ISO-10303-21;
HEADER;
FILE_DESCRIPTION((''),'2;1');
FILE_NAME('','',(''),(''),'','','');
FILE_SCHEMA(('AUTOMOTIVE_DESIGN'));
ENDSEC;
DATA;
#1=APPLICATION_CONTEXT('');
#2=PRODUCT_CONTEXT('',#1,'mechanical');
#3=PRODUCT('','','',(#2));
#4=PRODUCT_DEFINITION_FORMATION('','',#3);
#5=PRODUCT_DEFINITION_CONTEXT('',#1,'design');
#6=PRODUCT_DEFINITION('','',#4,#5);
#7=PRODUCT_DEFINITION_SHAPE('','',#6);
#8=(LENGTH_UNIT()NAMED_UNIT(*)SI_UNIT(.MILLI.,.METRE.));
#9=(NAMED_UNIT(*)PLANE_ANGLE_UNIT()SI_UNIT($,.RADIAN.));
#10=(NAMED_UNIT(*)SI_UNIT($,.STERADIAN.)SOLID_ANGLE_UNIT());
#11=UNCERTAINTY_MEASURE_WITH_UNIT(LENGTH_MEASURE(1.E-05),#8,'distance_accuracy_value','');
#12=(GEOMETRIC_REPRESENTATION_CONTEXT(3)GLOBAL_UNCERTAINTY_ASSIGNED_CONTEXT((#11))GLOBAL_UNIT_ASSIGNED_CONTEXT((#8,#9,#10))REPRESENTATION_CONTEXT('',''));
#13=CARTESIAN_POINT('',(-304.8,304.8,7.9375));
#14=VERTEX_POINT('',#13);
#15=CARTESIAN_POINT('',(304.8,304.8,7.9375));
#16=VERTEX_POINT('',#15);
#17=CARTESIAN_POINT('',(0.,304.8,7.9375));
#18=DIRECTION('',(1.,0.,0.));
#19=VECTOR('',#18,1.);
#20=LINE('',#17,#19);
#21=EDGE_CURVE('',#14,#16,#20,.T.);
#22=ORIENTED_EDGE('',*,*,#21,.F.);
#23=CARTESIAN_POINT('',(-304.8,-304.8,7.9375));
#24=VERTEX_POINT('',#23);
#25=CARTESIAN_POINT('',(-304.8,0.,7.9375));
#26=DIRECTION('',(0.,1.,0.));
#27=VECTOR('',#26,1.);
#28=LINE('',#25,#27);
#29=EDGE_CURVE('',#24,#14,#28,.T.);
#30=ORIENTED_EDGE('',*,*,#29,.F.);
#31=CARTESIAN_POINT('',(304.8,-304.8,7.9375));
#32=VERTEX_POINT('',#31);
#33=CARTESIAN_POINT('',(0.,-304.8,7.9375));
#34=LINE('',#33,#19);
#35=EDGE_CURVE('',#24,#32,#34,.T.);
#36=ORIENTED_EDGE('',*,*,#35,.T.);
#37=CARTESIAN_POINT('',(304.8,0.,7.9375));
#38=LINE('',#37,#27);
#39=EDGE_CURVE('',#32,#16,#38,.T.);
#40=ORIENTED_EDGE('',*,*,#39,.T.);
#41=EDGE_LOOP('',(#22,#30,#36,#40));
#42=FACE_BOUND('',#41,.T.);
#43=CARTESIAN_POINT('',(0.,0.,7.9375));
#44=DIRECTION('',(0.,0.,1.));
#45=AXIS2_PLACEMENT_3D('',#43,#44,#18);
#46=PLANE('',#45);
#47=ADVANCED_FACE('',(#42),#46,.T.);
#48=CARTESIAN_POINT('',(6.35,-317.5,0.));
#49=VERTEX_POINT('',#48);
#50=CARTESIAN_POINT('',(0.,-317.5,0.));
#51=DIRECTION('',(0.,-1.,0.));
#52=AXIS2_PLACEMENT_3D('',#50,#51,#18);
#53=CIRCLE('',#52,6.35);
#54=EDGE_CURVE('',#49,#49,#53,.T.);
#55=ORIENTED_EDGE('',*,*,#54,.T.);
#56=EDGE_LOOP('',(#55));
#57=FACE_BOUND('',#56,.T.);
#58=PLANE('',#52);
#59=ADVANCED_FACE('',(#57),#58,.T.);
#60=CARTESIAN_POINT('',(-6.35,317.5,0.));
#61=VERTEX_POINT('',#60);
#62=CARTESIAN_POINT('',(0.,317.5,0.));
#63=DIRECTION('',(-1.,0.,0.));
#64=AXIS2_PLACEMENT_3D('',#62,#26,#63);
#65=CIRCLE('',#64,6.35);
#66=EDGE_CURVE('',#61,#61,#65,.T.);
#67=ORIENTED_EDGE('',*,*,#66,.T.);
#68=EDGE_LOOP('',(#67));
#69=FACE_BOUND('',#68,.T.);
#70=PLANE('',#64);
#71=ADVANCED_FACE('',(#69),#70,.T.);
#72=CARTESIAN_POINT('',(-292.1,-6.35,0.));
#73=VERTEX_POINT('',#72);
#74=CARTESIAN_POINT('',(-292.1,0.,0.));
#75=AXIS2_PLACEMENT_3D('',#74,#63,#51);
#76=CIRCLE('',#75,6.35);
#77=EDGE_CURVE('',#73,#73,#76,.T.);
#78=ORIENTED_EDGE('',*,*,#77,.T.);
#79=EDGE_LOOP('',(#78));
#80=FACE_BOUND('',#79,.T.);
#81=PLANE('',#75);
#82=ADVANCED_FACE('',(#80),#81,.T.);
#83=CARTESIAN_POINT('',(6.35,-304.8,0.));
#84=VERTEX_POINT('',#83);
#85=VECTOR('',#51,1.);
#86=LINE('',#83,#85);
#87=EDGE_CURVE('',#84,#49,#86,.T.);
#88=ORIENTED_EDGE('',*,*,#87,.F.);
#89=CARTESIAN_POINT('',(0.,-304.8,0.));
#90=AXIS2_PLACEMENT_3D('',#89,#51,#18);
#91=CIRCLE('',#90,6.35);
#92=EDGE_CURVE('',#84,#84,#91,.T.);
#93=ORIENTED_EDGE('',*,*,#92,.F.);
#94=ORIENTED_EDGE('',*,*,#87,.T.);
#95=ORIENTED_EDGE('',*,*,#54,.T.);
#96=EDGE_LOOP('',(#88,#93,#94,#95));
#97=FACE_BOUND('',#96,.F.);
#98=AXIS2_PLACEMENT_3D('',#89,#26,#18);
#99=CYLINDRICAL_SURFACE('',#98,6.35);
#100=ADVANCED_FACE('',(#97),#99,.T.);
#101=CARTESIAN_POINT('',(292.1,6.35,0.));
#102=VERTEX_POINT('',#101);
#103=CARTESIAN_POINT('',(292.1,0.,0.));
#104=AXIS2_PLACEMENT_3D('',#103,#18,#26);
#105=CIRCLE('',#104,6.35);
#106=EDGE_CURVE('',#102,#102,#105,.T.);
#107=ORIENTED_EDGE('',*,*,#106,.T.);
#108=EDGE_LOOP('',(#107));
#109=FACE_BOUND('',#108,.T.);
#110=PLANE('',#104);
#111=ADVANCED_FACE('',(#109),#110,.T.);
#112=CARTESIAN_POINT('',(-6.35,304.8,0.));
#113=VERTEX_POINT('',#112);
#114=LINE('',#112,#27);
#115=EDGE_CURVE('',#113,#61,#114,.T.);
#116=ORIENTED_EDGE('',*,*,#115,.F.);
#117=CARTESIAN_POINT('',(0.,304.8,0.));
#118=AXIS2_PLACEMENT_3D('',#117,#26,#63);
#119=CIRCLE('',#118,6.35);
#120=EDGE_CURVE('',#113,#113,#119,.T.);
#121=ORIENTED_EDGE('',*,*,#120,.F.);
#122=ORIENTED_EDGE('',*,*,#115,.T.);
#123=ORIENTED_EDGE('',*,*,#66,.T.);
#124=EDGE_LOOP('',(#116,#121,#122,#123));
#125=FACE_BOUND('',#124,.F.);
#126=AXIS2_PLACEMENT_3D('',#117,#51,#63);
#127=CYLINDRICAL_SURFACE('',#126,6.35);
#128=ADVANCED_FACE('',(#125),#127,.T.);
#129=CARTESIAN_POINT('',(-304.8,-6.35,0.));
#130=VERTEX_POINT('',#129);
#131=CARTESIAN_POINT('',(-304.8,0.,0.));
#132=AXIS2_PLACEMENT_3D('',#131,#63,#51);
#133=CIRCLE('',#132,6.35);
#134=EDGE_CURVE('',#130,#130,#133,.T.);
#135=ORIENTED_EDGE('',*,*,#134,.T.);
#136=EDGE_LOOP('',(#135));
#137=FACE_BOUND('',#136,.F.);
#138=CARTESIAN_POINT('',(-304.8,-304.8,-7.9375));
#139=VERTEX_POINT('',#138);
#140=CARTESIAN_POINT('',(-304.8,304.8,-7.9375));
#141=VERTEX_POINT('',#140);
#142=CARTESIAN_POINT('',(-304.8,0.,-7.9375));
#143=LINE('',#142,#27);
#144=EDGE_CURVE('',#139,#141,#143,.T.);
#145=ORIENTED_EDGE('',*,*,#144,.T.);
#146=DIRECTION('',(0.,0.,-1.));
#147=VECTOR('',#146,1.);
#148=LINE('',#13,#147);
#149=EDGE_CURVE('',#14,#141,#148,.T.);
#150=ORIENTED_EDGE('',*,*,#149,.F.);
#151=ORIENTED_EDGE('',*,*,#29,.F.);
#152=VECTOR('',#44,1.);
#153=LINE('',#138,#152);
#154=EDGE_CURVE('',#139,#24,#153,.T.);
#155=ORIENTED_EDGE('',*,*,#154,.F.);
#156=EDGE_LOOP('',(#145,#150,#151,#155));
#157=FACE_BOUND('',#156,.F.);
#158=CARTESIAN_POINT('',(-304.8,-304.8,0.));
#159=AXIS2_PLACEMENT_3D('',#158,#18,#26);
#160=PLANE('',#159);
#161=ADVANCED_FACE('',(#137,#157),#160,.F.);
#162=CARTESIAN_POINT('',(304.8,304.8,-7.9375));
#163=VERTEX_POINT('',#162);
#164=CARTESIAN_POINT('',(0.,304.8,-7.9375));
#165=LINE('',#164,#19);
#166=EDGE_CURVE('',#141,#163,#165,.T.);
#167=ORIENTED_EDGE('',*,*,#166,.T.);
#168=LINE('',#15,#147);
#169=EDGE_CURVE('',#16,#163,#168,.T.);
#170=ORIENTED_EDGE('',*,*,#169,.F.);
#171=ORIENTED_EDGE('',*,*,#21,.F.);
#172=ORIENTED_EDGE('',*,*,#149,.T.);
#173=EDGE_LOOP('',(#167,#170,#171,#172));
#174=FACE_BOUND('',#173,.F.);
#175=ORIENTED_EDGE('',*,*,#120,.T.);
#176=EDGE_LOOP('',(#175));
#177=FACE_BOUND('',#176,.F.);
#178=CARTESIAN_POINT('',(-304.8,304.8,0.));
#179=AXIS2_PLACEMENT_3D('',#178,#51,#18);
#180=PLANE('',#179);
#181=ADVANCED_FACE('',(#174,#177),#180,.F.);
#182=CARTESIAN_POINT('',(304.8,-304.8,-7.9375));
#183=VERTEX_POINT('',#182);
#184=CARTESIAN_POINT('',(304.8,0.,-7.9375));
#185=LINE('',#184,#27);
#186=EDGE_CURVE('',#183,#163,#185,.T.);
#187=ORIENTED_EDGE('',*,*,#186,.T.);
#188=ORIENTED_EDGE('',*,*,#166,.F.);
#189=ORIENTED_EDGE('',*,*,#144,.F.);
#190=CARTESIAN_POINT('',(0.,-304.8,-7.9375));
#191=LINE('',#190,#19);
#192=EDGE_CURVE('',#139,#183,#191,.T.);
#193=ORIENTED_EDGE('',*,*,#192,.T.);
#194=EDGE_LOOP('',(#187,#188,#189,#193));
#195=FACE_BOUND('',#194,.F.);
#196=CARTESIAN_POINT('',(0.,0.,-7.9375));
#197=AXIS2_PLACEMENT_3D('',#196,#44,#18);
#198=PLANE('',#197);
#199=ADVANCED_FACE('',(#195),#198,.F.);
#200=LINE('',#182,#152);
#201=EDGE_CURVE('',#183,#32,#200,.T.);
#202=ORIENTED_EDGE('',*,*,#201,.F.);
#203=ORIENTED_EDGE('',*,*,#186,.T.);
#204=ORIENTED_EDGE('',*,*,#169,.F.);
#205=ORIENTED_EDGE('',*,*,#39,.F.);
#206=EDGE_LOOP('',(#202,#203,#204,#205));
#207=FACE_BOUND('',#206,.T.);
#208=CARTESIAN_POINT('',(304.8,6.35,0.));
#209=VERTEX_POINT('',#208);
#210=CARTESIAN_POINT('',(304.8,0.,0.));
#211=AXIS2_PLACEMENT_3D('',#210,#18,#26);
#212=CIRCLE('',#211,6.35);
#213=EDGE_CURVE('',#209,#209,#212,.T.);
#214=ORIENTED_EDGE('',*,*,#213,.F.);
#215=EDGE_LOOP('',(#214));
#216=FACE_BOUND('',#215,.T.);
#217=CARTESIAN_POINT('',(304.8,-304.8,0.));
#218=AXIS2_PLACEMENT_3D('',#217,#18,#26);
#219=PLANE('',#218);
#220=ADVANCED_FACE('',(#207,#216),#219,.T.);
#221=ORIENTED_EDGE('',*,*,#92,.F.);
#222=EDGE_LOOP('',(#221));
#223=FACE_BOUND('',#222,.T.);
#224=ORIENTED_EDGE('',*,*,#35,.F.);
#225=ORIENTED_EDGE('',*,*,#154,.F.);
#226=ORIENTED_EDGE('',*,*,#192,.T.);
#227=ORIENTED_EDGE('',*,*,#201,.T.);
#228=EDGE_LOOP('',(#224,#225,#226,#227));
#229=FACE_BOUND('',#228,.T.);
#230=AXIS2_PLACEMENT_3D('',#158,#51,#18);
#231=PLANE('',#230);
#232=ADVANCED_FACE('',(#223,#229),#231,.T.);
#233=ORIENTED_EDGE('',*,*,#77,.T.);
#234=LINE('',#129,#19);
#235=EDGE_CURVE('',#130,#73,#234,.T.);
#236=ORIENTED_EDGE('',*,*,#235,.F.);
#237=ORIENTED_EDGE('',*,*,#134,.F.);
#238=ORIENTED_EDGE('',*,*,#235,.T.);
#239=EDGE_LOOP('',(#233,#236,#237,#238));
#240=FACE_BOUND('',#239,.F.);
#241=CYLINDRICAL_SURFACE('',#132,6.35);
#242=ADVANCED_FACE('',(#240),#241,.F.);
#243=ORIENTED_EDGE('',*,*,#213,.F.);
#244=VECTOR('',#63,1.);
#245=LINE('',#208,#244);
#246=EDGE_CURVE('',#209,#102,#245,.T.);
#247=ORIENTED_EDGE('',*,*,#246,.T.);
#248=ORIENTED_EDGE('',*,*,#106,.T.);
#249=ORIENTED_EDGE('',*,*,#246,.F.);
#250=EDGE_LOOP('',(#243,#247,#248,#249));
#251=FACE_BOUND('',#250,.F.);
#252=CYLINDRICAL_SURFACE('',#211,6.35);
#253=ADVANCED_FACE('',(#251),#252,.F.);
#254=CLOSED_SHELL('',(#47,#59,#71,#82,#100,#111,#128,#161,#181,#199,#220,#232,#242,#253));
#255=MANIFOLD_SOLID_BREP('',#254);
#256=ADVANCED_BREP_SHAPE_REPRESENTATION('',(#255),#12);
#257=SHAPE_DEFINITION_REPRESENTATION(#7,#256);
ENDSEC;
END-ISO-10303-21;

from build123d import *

# Parameters (mm, degrees)
F0_W     = 609.6
F0_H     = 609.6
F1_DEPTH = 7.9375
F2_R     = 6.35
F3_DEPTH = 12.7
F4_R     = 6.35
F5_DEPTH = 12.7
F6_R     = 6.35
F7_DEPTH = 12.7
F8_R     = 6.35
F9_DEPTH = 12.7


# Not quite as in the source:
# - a length typed as a fraction of an inch, garbled in the dataset ("3 / 203.2 mm" for 3/8 in), is restored


with BuildPart() as f1:
    # F0 (on Top) → F1 (new body, symmetric)
    with BuildSketch(Plane.XY):
        Rectangle(F0_W, F0_H)
    extrude(amount=F1_DEPTH, both=True)

    # F2 (on face) → F3 (cut)
    with BuildSketch(Plane.YZ.offset(304.8)):
        Circle(F2_R)
    extrude(amount=-F3_DEPTH, mode=Mode.SUBTRACT)

    # F4 (on face) → F5 (join)
    with BuildSketch(Plane.XZ.offset(304.8)):
        Circle(F4_R)
    extrude(amount=F5_DEPTH)

    # F6 (on face) → F7 (cut)
    with BuildSketch(Plane(origin=(-304.8, 0, 0), x_dir=(0, -1, 0), z_dir=(-1, 0, 0))):
        Circle(F6_R)
    extrude(amount=-F7_DEPTH, mode=Mode.SUBTRACT)

    # F8 (on face) → F9 (join)
    with BuildSketch(Plane(origin=(0, 304.8, 0), x_dir=(-1, 0, 0), z_dir=(0, 1, 0))):
        Circle(F8_R)
    extrude(amount=F9_DEPTH)


solid = f1.part
